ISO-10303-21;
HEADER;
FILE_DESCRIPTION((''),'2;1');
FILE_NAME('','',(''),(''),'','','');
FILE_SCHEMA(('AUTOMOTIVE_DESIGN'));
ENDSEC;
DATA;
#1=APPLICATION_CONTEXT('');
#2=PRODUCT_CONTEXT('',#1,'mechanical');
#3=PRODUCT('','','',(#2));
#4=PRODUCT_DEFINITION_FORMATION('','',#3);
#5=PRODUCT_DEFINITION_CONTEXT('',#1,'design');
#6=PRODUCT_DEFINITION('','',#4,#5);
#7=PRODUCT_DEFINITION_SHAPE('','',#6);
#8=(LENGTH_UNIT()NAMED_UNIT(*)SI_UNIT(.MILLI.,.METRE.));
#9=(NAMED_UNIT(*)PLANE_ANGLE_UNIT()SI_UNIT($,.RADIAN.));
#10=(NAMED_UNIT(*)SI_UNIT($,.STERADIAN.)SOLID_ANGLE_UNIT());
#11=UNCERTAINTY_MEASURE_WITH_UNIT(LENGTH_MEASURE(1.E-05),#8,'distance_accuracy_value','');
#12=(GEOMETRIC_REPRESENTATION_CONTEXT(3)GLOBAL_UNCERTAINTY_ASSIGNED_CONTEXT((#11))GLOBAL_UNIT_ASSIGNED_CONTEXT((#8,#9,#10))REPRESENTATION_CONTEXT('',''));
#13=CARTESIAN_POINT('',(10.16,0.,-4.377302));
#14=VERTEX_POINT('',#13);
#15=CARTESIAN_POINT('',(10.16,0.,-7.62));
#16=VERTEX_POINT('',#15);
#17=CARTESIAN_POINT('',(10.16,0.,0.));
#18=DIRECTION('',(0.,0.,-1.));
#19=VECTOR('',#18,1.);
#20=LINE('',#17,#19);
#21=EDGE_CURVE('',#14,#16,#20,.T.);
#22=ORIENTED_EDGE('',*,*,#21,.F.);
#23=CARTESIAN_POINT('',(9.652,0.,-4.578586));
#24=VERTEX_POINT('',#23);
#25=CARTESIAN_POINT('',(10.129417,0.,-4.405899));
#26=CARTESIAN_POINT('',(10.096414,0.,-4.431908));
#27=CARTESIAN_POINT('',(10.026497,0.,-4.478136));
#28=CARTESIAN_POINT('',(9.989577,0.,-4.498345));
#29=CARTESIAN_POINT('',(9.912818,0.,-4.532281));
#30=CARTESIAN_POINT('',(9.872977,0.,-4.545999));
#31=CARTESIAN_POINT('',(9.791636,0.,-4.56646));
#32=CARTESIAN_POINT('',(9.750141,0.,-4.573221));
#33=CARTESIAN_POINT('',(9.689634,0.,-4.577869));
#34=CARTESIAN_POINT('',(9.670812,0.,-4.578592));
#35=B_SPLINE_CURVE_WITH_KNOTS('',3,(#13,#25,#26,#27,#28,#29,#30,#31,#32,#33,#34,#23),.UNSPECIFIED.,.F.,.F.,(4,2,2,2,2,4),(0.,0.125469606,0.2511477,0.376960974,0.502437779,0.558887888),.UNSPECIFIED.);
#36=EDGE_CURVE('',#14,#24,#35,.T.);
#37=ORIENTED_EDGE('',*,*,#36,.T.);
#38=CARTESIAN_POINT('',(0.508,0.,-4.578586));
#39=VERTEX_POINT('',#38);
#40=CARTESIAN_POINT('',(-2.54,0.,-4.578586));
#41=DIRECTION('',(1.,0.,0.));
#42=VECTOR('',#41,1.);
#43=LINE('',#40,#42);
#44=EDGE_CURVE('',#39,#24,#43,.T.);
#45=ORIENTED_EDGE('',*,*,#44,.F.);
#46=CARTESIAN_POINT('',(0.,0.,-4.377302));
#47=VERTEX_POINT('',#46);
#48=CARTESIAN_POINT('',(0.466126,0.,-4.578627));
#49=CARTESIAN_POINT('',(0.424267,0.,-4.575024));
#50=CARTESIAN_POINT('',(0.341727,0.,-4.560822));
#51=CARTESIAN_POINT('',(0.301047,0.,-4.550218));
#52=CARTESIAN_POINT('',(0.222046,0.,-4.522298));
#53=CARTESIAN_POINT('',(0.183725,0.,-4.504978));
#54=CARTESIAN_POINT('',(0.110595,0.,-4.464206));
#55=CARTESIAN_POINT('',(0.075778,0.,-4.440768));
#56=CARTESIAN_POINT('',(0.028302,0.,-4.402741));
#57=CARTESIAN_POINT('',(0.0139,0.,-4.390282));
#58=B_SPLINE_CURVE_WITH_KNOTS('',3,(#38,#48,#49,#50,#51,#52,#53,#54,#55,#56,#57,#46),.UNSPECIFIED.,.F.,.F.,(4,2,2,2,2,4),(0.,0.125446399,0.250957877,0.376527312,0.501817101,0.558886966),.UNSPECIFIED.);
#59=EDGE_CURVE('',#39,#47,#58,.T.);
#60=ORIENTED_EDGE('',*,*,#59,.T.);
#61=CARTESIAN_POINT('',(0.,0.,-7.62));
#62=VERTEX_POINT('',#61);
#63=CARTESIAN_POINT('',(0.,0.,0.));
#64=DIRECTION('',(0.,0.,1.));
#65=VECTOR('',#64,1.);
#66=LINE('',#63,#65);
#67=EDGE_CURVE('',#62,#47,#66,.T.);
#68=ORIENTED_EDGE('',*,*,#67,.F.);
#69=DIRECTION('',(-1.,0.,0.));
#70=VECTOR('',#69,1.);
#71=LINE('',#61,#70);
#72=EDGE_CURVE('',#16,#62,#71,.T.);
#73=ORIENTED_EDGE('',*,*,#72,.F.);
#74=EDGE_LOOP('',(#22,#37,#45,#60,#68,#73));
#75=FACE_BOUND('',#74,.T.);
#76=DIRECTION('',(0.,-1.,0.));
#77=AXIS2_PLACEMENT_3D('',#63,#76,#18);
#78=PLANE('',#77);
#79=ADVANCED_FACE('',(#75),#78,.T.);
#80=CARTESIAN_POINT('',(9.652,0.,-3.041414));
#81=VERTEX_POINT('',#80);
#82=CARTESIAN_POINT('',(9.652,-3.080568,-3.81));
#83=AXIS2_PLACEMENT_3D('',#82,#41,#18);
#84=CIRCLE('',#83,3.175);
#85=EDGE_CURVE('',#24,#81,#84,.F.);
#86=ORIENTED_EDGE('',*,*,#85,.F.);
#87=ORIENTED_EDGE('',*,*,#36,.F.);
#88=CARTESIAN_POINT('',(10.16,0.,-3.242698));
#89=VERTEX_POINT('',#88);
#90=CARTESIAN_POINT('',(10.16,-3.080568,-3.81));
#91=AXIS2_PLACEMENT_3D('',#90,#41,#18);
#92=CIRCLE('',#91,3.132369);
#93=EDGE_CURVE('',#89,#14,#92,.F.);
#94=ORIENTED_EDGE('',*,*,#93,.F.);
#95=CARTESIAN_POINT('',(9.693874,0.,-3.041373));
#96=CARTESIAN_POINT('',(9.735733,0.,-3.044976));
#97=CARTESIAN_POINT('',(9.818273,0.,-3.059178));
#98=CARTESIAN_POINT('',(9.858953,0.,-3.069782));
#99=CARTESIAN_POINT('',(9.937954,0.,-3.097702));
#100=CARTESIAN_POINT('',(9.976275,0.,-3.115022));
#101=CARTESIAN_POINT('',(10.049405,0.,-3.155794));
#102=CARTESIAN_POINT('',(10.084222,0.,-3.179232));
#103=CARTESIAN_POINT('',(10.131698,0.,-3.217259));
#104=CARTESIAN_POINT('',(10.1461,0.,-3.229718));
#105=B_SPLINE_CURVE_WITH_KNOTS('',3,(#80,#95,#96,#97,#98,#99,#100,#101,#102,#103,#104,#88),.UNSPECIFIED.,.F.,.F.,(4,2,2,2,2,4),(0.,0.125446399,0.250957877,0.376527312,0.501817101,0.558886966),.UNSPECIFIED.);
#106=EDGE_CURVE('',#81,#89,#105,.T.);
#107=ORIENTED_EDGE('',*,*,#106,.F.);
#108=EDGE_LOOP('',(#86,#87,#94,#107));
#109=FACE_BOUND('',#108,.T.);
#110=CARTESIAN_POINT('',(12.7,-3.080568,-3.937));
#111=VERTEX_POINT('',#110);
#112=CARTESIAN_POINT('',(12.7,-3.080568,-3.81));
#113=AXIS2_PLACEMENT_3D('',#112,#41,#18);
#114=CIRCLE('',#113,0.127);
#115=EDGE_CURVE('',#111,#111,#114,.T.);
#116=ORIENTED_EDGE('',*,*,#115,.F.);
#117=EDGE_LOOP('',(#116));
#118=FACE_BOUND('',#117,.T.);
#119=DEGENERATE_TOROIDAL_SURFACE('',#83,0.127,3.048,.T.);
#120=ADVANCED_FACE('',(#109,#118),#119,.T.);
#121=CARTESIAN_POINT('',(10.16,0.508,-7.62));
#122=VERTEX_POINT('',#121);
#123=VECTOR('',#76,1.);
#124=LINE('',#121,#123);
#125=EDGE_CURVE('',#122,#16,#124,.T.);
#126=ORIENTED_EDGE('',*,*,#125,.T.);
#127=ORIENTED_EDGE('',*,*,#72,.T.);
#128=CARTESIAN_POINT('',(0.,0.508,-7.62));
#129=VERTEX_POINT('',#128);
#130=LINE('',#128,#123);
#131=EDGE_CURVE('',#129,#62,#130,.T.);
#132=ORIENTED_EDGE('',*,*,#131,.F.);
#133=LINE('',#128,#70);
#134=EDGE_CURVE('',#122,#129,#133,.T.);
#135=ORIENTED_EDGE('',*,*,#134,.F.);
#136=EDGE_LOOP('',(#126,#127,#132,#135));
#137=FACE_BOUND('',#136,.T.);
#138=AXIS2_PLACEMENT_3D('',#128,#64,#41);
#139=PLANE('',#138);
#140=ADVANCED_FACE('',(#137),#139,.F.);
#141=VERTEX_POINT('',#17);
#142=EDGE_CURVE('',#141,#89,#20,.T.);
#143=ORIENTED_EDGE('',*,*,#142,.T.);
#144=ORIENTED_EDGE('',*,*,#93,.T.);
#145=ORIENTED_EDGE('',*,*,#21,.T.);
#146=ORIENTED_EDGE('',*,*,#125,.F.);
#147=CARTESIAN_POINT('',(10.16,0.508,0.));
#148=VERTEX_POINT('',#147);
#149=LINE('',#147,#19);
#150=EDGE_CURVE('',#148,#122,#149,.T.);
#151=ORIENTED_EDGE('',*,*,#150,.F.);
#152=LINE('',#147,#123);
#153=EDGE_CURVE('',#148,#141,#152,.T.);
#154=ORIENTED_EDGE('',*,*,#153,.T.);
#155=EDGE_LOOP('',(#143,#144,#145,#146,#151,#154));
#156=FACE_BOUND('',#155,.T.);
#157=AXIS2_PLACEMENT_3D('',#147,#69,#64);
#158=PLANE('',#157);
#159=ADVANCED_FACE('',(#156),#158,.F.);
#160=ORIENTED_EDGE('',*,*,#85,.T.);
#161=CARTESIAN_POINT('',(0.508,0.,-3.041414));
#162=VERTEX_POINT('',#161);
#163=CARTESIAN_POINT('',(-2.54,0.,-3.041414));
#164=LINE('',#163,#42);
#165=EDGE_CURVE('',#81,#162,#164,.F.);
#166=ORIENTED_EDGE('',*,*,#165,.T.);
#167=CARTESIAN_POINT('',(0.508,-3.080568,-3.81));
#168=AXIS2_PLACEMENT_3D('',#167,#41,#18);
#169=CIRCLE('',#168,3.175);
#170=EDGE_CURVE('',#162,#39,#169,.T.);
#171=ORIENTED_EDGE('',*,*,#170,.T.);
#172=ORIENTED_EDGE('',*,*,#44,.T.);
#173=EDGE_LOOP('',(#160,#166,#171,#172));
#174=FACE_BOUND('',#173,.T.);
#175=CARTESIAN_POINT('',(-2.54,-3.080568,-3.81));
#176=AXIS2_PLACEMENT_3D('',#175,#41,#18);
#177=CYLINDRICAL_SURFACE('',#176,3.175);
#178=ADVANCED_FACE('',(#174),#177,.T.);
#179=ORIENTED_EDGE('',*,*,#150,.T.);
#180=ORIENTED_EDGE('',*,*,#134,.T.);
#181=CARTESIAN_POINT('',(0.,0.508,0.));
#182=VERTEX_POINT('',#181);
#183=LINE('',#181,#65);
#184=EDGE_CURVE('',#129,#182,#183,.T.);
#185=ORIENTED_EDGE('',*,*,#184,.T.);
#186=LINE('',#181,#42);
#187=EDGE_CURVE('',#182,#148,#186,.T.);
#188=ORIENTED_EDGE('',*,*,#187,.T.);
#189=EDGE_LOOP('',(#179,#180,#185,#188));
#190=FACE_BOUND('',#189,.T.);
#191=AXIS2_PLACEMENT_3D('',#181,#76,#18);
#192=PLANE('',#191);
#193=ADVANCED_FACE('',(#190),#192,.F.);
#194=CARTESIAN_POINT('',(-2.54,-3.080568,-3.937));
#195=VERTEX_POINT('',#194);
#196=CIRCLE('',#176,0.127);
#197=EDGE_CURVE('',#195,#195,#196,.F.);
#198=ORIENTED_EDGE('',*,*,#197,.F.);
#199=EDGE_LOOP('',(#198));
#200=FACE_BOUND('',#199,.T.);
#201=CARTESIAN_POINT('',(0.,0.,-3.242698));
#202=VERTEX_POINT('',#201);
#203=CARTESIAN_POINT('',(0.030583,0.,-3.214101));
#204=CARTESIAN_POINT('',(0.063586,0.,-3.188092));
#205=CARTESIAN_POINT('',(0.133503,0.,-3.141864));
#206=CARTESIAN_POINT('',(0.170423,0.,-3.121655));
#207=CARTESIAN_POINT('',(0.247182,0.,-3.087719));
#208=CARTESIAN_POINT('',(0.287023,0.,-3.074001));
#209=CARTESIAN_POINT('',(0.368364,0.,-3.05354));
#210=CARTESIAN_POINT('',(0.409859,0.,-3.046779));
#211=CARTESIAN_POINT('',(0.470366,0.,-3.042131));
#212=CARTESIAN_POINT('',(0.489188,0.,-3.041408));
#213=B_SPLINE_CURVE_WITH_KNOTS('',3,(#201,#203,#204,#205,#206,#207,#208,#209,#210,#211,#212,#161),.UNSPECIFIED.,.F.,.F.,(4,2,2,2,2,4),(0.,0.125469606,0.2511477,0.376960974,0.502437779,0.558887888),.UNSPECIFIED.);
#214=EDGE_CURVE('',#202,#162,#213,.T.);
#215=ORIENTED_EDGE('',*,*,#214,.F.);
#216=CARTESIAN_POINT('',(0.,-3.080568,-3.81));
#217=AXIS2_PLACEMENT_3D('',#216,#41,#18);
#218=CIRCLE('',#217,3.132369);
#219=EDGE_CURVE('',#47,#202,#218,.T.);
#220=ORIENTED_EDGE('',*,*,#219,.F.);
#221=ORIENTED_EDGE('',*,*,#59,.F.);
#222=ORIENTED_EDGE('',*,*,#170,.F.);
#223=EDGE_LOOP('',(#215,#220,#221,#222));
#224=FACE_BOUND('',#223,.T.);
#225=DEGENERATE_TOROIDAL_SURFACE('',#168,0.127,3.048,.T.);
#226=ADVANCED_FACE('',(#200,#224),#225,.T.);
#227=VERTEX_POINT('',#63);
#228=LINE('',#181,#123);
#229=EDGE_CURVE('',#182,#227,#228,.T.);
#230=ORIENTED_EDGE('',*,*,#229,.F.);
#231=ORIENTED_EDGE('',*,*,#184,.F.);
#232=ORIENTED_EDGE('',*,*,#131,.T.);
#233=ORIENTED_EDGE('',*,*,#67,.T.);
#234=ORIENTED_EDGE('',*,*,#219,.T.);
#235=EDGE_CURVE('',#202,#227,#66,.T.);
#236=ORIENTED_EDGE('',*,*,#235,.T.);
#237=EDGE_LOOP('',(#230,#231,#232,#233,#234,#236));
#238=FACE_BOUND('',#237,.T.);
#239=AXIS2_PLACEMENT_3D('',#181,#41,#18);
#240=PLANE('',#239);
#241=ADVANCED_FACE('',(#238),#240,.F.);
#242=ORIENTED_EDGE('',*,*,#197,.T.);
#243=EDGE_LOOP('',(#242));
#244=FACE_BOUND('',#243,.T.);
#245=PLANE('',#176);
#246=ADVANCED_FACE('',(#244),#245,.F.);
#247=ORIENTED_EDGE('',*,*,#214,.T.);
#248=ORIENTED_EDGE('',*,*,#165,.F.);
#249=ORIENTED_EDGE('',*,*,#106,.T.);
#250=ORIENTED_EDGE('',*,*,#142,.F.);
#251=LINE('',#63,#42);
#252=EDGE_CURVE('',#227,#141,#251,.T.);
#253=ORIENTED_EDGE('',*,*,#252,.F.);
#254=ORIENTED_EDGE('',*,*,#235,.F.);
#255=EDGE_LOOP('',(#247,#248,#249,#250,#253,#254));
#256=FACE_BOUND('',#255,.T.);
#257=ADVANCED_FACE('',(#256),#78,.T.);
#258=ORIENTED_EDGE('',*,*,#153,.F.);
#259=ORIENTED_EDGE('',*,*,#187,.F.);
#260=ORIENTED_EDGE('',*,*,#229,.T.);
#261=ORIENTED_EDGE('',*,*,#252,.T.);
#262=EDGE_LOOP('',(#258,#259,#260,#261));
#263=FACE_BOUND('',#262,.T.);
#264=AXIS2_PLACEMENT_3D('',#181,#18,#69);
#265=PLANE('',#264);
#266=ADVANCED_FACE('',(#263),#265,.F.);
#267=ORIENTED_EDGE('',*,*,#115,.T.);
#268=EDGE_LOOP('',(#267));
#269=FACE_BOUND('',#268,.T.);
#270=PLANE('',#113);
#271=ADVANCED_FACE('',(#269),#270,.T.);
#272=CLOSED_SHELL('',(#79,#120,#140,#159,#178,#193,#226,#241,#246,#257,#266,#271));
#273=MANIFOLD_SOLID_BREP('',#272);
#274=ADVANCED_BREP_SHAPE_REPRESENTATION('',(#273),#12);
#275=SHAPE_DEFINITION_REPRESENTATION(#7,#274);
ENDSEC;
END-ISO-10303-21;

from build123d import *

# Parameters (mm, degrees)
SKETCH1_W           = 10.16
SKETCH1_H           = 7.62
BOSS_EXTRUDE1_DEPTH = 0.508
SKETCH2_R           = 3.175
BOSS_EXTRUDE2_DEPTH = 15.24
FILLET1_R           = 3.048
FILLET2_R           = 3.048


with BuildPart() as part:
    # Sketch1 → Boss-Extrude1 (new body)
    with BuildSketch(Plane(origin=(0, 0, 0), x_dir=(1, 0, 0), z_dir=(0, 1, 0))):
        with Locations((5.08, 3.81)):
            Rectangle(SKETCH1_W, SKETCH1_H)
    extrude(amount=BOSS_EXTRUDE1_DEPTH)

    # Sketch2 → Boss-Extrude2 (add)
    with BuildSketch(Plane(origin=(12.7, 0, 0), x_dir=(0, 0, -1), z_dir=(1, 0, 0))):
        with Locations((3.81, -3.080568226)):
            Circle(SKETCH2_R)
    extrude(amount=-BOSS_EXTRUDE2_DEPTH)

    # Fillet1
    # the kernel refuses this fillet: 3.048 mm, written as the material it takes off along each edge
    with BuildSketch(Plane(origin=(-2.54, -3.080568226, -3.81), x_dir=(0, 0, -1), z_dir=(0, -1, 0))) as fillet1_piece_1_section:
        with BuildLine():
            CenterArc((3.175 - FILLET1_R, FILLET1_R), FILLET1_R, 270, 90)
            Line((3.175 - FILLET1_R, 0), (3.175, 0))
            Line((3.175, 0), (3.175, FILLET1_R))
        make_face()
    fillet1_piece_1 = revolve(axis=Axis((-2.54, -3.080568226, -3.81), (1, 0, 0)), mode=Mode.PRIVATE)
    fillet1_piece_1 = split(fillet1_piece_1, bisect_by=Plane(origin=(0, -1.050120042, -6.248507941), z_dir=(1, 0, 0)), keep=Keep.TOP, mode=Mode.PRIVATE)
    fillet1_piece_1 = split(fillet1_piece_1, bisect_by=Plane(origin=(0.252364317, 0, -6.248507941), z_dir=(0, -1, 0)), keep=Keep.TOP, mode=Mode.PRIVATE)
    add(fillet1_piece_1, mode=Mode.SUBTRACT)
    with BuildSketch(Plane(origin=(-2.54, -3.080568226, -3.81), x_dir=(0, 0, -1), z_dir=(0, -1, 0))) as fillet1_piece_2_section:
        with BuildLine():
            CenterArc((3.175 - FILLET1_R, FILLET1_R), FILLET1_R, 270, 90)
            Line((3.175 - FILLET1_R, 0), (3.175, 0))
            Line((3.175, 0), (3.175, FILLET1_R))
        make_face()
    fillet1_piece_2 = revolve(axis=Axis((-2.54, -3.080568226, -3.81), (1, 0, 0)), mode=Mode.PRIVATE)
    fillet1_piece_2 = split(fillet1_piece_2, bisect_by=Plane(origin=(0, -3.080568226, -1.694272015), z_dir=(-1, 0, 0)), keep=Keep.TOP, mode=Mode.PRIVATE)
    fillet1_piece_2 = split(fillet1_piece_2, bisect_by=Plane(origin=(-1.845094679, 0, -1.694272015), z_dir=(0, -1, 0)), keep=Keep.TOP, mode=Mode.PRIVATE)
    add(fillet1_piece_2, mode=Mode.SUBTRACT)
    with BuildSketch(Plane(origin=(-2.54, -3.080568226, -3.81), x_dir=(0, 0, -1), z_dir=(0, -1, 0))) as fillet1_piece_3_section:
        with BuildLine():
            CenterArc((3.175 - FILLET1_R, FILLET1_R), FILLET1_R, 270, 90)
            Line((3.175 - FILLET1_R, 0), (3.175, 0))
            Line((3.175, 0), (3.175, FILLET1_R))
        make_face()
    fillet1_piece_3 = revolve(axis=Axis((-2.54, -3.080568226, -3.81), (1, 0, 0)), mode=Mode.PRIVATE)
    fillet1_piece_3 = split(fillet1_piece_3, bisect_by=Plane(origin=(0, 0.062655826, -3.81), z_dir=(-1, 0, 0)), keep=Keep.TOP, mode=Mode.PRIVATE)
    fillet1_piece_3 = split(fillet1_piece_3, bisect_by=Plane(origin=(-1.310113103, 0, -3.81), z_dir=(0, 1, 0)), keep=Keep.TOP, mode=Mode.PRIVATE)
    add(fillet1_piece_3, mode=Mode.SUBTRACT)

    # Fillet2
    # the kernel refuses this fillet: 3.048 mm, written as the material it takes off along each edge
    with BuildSketch(Plane(origin=(12.7, -3.080568226, -3.81), x_dir=(0, 0, -1), z_dir=(0, -1, 0))) as fillet2_piece_1_section:
        with BuildLine():
            CenterArc((3.175 - FILLET2_R, -FILLET2_R), FILLET2_R, 0, 90)
            Line((3.175 - FILLET2_R, 0), (3.175, 0))
            Line((3.175, 0), (3.175, -FILLET2_R))
        make_face()
    fillet2_piece_1 = revolve(axis=Axis((12.7, -3.080568226, -3.81), (1, 0, 0)), mode=Mode.PRIVATE)
    fillet2_piece_1 = split(fillet2_piece_1, bisect_by=Plane(origin=(9.907635683, 0, -6.248507942), z_dir=(0, -1, 0)), keep=Keep.TOP, mode=Mode.PRIVATE)
    fillet2_piece_1 = split(fillet2_piece_1, bisect_by=Plane(origin=(10.16, -1.050120042, -6.248507942), z_dir=(-1, 0, 0)), keep=Keep.TOP, mode=Mode.PRIVATE)
    add(fillet2_piece_1, mode=Mode.SUBTRACT)
    with BuildSketch(Plane(origin=(12.7, -3.080568226, -3.81), x_dir=(0, 0, -1), z_dir=(0, -1, 0))) as fillet2_piece_2_section:
        with BuildLine():
            CenterArc((3.175 - FILLET2_R, -FILLET2_R), FILLET2_R, 0, 90)
            Line((3.175 - FILLET2_R, 0), (3.175, 0))
            Line((3.175, 0), (3.175, -FILLET2_R))
        make_face()
    fillet2_piece_2 = revolve(axis=Axis((12.7, -3.080568226, -3.81), (1, 0, 0)), mode=Mode.PRIVATE)
    fillet2_piece_2 = split(fillet2_piece_2, bisect_by=Plane(origin=(12.005094679, 0, -1.694272014), z_dir=(0, -1, 0)), keep=Keep.TOP, mode=Mode.PRIVATE)
    fillet2_piece_2 = split(fillet2_piece_2, bisect_by=Plane(origin=(10.16, -3.080568226, -1.694272014), z_dir=(1, 0, 0)), keep=Keep.TOP, mode=Mode.PRIVATE)
    add(fillet2_piece_2, mode=Mode.SUBTRACT)
    with BuildSketch(Plane(origin=(12.7, -3.080568226, -3.81), x_dir=(0, 0, -1), z_dir=(0, -1, 0))) as fillet2_piece_3_section:
        with BuildLine():
            CenterArc((3.175 - FILLET2_R, -FILLET2_R), FILLET2_R, 0, 90)
            Line((3.175 - FILLET2_R, 0), (3.175, 0))
            Line((3.175, 0), (3.175, -FILLET2_R))
        make_face()
    fillet2_piece_3 = revolve(axis=Axis((12.7, -3.080568226, -3.81), (1, 0, 0)), mode=Mode.PRIVATE)
    fillet2_piece_3 = split(fillet2_piece_3, bisect_by=Plane(origin=(11.470113103, 0, -3.81), z_dir=(0, 1, 0)), keep=Keep.TOP, mode=Mode.PRIVATE)
    fillet2_piece_3 = split(fillet2_piece_3, bisect_by=Plane(origin=(10.16, 0.062655826, -3.81), z_dir=(1, 0, 0)), keep=Keep.TOP, mode=Mode.PRIVATE)
    add(fillet2_piece_3, mode=Mode.SUBTRACT)


solid = part.part
